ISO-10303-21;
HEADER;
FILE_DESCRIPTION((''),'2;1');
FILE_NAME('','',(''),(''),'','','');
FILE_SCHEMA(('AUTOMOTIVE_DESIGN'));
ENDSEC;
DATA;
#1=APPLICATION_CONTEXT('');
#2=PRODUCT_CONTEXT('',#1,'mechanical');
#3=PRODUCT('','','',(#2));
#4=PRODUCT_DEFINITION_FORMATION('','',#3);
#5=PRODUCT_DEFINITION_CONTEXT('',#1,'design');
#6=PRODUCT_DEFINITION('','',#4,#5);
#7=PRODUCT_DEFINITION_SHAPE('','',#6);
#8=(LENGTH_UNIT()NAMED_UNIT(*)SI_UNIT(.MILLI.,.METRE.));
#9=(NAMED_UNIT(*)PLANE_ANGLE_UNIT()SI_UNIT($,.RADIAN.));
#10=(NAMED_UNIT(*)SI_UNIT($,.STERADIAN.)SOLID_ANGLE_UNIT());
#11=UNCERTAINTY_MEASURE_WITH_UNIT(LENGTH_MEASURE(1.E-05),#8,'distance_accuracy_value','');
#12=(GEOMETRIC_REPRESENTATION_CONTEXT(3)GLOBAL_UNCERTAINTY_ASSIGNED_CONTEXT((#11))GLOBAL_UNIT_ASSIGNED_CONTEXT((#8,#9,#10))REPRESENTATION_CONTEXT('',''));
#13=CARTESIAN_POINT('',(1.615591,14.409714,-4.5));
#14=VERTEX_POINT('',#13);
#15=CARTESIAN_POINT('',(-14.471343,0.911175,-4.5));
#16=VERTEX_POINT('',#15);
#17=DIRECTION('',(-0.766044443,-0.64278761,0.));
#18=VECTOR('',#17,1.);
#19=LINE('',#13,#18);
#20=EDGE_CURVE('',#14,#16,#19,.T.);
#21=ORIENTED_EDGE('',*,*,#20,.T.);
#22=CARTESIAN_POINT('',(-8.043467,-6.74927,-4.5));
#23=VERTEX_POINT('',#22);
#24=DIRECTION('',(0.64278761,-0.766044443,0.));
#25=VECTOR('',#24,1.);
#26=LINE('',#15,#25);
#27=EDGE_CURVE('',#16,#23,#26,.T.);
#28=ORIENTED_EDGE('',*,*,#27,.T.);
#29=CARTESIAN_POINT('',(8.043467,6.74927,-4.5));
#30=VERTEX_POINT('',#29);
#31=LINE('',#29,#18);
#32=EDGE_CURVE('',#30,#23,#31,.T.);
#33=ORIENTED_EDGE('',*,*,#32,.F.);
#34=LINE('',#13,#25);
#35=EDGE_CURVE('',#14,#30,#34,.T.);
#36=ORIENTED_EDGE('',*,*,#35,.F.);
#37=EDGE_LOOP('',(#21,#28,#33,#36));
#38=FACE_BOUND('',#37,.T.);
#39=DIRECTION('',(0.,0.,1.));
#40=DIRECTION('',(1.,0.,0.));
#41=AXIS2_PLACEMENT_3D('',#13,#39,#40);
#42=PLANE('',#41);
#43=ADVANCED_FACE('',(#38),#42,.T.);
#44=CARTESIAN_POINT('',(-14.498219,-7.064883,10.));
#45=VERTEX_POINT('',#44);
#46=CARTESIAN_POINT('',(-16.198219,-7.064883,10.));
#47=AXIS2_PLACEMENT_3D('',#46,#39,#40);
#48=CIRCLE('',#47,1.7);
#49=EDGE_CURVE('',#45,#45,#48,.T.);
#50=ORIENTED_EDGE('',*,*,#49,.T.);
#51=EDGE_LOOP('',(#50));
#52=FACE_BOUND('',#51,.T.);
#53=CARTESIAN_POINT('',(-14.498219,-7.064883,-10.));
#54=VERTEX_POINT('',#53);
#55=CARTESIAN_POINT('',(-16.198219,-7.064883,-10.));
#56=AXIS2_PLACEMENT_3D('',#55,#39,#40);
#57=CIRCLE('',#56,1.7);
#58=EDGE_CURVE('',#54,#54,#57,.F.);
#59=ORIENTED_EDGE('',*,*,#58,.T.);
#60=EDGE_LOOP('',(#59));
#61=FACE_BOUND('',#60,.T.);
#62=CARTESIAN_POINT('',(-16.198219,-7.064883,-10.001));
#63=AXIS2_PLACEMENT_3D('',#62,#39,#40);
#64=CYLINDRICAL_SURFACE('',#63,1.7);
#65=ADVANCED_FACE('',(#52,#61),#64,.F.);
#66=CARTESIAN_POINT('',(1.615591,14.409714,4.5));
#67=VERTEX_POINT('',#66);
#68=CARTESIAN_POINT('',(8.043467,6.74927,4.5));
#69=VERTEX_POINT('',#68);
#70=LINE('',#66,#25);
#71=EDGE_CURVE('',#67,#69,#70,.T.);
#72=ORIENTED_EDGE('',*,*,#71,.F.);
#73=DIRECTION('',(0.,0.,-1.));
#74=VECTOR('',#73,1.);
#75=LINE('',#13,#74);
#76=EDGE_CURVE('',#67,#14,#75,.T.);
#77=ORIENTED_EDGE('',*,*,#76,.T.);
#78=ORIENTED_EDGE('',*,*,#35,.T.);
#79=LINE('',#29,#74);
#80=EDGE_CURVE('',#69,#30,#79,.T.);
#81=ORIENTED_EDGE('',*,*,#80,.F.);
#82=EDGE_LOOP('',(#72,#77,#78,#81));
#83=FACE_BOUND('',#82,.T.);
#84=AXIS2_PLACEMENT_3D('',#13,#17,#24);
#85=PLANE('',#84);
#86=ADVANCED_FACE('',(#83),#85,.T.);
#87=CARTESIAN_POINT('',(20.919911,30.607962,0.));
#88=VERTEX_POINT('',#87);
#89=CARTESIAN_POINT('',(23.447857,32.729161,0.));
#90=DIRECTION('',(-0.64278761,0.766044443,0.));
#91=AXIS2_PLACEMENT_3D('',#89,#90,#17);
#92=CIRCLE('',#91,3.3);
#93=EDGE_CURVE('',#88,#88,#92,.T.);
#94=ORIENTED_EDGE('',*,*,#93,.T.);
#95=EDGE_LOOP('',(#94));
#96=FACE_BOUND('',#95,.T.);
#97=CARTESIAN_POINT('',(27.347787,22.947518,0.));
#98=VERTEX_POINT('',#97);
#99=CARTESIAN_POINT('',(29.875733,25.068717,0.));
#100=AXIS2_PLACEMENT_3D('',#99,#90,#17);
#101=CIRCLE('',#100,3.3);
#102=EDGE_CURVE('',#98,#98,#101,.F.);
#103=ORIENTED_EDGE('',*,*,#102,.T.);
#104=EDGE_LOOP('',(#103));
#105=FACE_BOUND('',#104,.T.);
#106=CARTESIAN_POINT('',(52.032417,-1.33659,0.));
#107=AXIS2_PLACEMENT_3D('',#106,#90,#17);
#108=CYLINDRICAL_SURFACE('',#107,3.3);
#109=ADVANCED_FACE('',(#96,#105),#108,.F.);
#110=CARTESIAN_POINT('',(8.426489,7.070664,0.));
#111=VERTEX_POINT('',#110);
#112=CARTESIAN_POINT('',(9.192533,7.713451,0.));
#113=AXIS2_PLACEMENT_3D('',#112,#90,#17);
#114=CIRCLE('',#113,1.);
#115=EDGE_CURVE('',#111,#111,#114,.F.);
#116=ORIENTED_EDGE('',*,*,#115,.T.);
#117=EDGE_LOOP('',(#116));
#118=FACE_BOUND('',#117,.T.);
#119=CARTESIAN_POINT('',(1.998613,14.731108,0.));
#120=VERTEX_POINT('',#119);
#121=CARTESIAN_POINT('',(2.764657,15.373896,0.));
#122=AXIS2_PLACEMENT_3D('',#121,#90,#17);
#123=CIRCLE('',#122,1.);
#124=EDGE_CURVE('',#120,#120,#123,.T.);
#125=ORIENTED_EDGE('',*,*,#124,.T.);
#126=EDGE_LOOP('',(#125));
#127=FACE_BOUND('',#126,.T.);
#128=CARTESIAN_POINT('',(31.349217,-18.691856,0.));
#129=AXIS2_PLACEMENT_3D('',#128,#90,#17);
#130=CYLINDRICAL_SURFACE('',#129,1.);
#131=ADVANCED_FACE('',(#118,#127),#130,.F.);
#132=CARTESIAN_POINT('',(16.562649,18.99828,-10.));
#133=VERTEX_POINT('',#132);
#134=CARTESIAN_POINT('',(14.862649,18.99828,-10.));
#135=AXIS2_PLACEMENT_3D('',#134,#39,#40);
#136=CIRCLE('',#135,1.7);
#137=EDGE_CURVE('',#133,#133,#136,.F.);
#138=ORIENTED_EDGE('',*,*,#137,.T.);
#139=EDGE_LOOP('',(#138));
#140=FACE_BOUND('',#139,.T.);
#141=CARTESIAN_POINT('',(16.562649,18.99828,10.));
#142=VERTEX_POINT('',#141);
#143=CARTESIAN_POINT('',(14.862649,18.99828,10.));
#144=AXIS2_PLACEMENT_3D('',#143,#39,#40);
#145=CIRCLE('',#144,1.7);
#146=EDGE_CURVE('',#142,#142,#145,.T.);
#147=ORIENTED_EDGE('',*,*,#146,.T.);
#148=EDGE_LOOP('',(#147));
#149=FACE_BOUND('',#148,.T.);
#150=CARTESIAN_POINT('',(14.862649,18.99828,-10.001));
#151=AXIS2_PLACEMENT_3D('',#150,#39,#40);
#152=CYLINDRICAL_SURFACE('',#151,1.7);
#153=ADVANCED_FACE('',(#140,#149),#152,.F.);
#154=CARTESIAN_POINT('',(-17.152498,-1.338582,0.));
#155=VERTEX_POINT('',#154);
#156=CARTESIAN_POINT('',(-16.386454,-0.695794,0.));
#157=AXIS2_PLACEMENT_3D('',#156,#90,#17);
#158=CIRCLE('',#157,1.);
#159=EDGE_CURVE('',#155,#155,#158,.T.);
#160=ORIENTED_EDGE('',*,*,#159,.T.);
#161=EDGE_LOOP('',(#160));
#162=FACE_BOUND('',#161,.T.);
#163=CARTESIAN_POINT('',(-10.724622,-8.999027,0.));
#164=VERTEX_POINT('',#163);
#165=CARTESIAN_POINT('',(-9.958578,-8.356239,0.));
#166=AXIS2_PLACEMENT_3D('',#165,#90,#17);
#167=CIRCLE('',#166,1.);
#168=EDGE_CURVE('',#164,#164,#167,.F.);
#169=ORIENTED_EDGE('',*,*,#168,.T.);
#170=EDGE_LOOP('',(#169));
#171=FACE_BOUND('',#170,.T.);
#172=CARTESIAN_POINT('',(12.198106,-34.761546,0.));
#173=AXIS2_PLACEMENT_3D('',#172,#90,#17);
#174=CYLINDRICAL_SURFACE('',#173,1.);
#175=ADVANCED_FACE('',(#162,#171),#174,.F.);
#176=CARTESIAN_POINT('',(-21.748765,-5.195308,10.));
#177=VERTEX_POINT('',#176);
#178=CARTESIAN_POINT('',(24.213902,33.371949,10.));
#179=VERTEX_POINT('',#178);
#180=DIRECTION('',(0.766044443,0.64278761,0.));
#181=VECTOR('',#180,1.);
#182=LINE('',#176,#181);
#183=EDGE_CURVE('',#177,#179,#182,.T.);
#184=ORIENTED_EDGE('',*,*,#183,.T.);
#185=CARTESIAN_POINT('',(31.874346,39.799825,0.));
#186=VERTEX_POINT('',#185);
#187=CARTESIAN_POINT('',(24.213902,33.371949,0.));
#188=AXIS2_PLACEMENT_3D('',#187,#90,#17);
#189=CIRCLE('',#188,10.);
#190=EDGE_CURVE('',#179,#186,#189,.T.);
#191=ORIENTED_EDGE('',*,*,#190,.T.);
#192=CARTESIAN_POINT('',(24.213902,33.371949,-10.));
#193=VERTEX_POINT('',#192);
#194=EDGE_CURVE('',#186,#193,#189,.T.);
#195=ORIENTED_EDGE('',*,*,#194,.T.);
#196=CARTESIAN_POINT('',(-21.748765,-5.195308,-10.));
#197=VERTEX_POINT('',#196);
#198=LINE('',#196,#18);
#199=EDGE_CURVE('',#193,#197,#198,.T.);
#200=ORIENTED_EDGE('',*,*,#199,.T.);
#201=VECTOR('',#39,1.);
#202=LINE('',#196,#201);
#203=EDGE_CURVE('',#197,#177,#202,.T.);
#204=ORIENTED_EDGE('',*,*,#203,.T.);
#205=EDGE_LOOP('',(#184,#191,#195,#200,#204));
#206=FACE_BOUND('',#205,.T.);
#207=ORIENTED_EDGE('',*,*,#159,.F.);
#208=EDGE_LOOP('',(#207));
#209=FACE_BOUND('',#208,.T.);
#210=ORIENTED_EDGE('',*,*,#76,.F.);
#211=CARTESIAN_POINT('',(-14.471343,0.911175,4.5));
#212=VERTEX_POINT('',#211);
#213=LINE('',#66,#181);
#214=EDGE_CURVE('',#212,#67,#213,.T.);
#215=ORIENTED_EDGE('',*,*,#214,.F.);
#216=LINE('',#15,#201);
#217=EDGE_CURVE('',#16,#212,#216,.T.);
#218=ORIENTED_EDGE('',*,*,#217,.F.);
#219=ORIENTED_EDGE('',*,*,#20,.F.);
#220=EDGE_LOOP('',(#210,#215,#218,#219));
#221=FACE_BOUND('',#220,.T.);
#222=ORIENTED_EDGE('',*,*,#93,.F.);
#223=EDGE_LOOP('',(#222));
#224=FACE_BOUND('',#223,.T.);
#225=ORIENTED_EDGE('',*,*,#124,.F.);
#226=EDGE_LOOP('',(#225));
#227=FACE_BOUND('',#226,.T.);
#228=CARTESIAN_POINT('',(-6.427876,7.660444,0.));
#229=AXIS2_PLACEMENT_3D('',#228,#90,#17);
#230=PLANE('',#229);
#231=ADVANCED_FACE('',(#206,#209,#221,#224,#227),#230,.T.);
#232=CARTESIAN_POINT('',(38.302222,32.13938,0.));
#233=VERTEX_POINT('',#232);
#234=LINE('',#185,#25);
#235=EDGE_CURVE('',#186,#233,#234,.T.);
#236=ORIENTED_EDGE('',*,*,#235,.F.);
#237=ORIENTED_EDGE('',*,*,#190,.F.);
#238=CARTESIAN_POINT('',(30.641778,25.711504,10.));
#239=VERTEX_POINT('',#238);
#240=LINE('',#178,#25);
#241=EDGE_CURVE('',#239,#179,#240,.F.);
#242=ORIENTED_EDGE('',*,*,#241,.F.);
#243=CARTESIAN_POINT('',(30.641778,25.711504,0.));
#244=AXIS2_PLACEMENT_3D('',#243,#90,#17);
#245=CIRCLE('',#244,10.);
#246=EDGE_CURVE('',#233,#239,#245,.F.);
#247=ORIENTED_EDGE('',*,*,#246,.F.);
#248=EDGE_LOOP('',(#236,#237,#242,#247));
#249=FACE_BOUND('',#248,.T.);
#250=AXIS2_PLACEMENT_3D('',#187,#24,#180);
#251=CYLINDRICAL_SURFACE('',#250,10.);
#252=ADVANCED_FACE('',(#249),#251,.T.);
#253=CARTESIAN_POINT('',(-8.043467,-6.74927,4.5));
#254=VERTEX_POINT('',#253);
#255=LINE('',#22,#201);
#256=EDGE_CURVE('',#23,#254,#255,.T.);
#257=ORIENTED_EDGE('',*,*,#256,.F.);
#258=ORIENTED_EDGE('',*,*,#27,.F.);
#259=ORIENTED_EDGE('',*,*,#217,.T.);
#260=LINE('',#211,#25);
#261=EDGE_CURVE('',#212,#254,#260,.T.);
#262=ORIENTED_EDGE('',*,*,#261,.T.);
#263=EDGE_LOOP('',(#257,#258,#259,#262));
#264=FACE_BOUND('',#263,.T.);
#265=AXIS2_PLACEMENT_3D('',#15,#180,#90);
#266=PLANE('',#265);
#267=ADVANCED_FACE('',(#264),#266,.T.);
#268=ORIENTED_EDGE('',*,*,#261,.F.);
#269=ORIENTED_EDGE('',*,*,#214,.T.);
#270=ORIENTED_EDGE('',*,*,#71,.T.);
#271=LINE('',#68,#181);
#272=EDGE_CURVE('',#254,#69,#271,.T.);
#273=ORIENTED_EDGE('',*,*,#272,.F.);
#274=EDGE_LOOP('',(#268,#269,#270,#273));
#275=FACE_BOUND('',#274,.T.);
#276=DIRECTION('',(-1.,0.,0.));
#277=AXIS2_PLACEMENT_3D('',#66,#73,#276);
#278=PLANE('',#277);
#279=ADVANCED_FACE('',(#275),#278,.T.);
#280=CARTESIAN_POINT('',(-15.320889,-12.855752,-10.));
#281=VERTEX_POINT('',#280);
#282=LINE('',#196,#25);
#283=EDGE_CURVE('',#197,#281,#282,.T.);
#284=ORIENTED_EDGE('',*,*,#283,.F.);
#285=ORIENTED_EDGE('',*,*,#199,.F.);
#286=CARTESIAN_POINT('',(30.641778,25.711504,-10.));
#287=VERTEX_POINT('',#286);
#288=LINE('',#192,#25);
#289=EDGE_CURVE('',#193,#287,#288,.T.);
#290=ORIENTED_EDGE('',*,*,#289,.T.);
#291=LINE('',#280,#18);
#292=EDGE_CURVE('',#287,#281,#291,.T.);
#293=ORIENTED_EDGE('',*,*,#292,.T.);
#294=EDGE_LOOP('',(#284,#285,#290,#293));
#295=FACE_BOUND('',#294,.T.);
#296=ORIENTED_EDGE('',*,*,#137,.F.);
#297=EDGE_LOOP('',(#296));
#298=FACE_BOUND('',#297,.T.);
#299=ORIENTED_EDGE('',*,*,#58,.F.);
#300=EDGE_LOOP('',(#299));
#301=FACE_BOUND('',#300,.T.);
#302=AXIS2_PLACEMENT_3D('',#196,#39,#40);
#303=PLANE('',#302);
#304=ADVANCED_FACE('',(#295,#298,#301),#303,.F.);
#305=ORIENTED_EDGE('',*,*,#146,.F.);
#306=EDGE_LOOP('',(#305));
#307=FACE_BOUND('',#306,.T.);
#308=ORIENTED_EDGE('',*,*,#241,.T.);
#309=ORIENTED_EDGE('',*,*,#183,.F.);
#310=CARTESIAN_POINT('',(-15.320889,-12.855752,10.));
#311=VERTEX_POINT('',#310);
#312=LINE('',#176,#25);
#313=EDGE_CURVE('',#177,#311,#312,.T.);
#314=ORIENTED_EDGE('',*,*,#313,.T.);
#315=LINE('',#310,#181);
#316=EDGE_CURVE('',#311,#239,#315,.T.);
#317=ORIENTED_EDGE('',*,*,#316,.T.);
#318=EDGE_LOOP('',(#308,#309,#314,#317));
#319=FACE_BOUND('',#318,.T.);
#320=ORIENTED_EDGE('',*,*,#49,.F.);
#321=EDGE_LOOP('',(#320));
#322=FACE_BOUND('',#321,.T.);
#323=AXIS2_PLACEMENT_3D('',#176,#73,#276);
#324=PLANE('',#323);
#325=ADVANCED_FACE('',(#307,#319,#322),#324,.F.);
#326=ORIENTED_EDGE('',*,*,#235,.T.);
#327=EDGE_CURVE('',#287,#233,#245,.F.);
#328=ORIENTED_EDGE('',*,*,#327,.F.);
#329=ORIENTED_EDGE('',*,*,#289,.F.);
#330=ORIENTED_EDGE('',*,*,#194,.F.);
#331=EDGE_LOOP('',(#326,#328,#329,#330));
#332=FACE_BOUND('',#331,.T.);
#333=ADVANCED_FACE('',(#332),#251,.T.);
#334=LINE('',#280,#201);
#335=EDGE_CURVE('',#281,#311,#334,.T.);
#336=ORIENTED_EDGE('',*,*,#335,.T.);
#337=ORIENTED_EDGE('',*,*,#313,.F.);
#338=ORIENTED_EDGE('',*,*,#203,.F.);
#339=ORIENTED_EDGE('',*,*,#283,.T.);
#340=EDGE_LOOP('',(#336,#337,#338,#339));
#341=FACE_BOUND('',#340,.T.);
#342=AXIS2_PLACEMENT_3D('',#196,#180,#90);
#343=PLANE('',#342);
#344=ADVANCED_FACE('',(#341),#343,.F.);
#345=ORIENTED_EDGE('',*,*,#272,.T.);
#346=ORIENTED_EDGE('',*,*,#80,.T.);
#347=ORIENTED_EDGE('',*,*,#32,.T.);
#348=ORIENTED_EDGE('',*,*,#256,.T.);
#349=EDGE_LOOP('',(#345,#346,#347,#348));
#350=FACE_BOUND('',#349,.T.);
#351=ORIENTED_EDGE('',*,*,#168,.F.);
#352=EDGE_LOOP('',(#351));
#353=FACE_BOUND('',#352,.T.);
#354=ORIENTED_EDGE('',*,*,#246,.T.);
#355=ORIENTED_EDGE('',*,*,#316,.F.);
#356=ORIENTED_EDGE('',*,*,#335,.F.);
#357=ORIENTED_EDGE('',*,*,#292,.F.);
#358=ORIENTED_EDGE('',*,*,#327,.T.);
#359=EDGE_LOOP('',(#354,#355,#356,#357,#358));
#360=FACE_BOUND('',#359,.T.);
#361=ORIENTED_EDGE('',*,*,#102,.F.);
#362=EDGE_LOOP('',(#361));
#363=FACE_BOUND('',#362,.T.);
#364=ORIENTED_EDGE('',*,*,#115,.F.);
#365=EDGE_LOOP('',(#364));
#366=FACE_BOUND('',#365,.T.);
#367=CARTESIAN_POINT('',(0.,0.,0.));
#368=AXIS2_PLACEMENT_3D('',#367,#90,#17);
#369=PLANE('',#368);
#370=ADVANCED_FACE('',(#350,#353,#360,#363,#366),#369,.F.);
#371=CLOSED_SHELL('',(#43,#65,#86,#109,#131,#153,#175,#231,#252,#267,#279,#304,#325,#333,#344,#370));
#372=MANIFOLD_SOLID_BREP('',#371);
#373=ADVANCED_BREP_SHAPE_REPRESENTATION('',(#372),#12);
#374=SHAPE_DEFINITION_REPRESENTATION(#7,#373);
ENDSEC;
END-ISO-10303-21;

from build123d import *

# Parameters (mm, degrees)
SKETCH_1_W          = 70
SKETCH_1_H          = 20
SKETCH_1_W_2        = 21
SKETCH_1_H_2        = 9
EXTRUDE_1_DEPTH     = 10
CUT_EXTRUDE_1_REACH = 57.98
SKETCH_3_R          = 3.3
SKETCH_3_R_2        = 1
CUT_EXTRUDE_2_REACH = 60.746
SKETCH_4_R          = 1.7
FILLET_1_R          = 10


with BuildPart() as part:
    # 草图1 → 凸台-拉伸1 (new body)
    with BuildSketch(Plane(origin=(0, 0, 0), x_dir=(0.7660444431189771, 0.6427876096865406, 0), z_dir=(-0.6427876096865406, 0.7660444431189771, 0))):
        with Locations((15, 0)):
            Rectangle(SKETCH_1_W, SKETCH_1_H)
        Rectangle(SKETCH_1_W_2, SKETCH_1_H_2, mode=Mode.SUBTRACT)
    extrude(amount=EXTRUDE_1_DEPTH)

    # 草图3 → 切除-拉伸1 (cut, up to next)
    with BuildSketch(Plane(origin=(-6.427876097, 7.660444431, 0), x_dir=(0.7660444431189771, 0.6427876096865406, 0), z_dir=(-0.6427876096865405, 0.766044443118977, 0)), mode=Mode.PRIVATE) as cut_extrude_1_sk1:
        with Locations(Location((39, 0, 0), (0, 0, 180))):
            Circle(SKETCH_3_R)
    cut_extrude_1_tool1 = extrude(cut_extrude_1_sk1.sketch, amount=-CUT_EXTRUDE_1_REACH, mode=Mode.PRIVATE) & part.part
    # 草图3 → 切除-拉伸1 (cut, up to next)
    with BuildSketch(Plane(origin=(-6.427876097, 7.660444431, 0), x_dir=(0.7660444431189771, 0.6427876096865406, 0), z_dir=(-0.6427876096865405, 0.766044443118977, 0)), mode=Mode.PRIVATE) as cut_extrude_1_sk2:
        with Locations(Location((-13, 0, 0), (0, 0, 180))):
            Circle(SKETCH_3_R_2)
    cut_extrude_1_tool2 = extrude(cut_extrude_1_sk2.sketch, amount=-CUT_EXTRUDE_1_REACH, mode=Mode.PRIVATE) & part.part
    # 草图3 → 切除-拉伸1 (cut, up to next)
    with BuildSketch(Plane(origin=(-6.427876097, 7.660444431, 0), x_dir=(0.7660444431189771, 0.6427876096865406, 0), z_dir=(-0.6427876096865405, 0.766044443118977, 0)), mode=Mode.PRIVATE) as cut_extrude_1_sk3:
        with Locations(Location((12, 0, 0), (0, 0, 180))):
            Circle(SKETCH_3_R_2)
    cut_extrude_1_tool3 = extrude(cut_extrude_1_sk3.sketch, amount=-CUT_EXTRUDE_1_REACH, mode=Mode.PRIVATE) & part.part
    add(cut_extrude_1_tool1.solids().sort_by_distance((23.447857, 32.729161, 0))[0], mode=Mode.SUBTRACT)
    add(cut_extrude_1_tool2.solids().sort_by_distance((-16.386454, -0.695794, 0))[0], mode=Mode.SUBTRACT)
    add(cut_extrude_1_tool3.solids().sort_by_distance((2.764657, 15.373896, 0))[0], mode=Mode.SUBTRACT)

    # 草图4 → 切除-拉伸2 (cut, up to next)
    with BuildSketch(Plane.XY.offset(10), mode=Mode.PRIVATE) as cut_extrude_2_sk1:
        with Locations((-16.198218668, -7.064882864)):
            Circle(SKETCH_4_R)
    cut_extrude_2_tool1 = extrude(cut_extrude_2_sk1.sketch, amount=-CUT_EXTRUDE_2_REACH, mode=Mode.PRIVATE) & part.part
    # 草图4 → 切除-拉伸2 (cut, up to next)
    with BuildSketch(Plane.XY.offset(10), mode=Mode.PRIVATE) as cut_extrude_2_sk2:
        with Locations((14.862649296, 18.998279989)):
            Circle(SKETCH_4_R)
    cut_extrude_2_tool2 = extrude(cut_extrude_2_sk2.sketch, amount=-CUT_EXTRUDE_2_REACH, mode=Mode.PRIVATE) & part.part
    add(cut_extrude_2_tool1.solids().sort_by_distance((-16.198219, -7.064883, 10))[0], mode=Mode.SUBTRACT)
    add(cut_extrude_2_tool2.solids().sort_by_distance((14.862649, 18.99828, 10))[0], mode=Mode.SUBTRACT)

    # 圆角1
    fillet_1_edges = [part.edges().sort_by_distance(p)[0] for p in [
        (35.088284108, 35.9696027, -10),
        (35.088284108, 35.9696027, 10),
    ]]
    fillet(fillet_1_edges, radius=FILLET_1_R - 0.0001)  # a hair under: the kernel refuses the full size


solid = part.part
